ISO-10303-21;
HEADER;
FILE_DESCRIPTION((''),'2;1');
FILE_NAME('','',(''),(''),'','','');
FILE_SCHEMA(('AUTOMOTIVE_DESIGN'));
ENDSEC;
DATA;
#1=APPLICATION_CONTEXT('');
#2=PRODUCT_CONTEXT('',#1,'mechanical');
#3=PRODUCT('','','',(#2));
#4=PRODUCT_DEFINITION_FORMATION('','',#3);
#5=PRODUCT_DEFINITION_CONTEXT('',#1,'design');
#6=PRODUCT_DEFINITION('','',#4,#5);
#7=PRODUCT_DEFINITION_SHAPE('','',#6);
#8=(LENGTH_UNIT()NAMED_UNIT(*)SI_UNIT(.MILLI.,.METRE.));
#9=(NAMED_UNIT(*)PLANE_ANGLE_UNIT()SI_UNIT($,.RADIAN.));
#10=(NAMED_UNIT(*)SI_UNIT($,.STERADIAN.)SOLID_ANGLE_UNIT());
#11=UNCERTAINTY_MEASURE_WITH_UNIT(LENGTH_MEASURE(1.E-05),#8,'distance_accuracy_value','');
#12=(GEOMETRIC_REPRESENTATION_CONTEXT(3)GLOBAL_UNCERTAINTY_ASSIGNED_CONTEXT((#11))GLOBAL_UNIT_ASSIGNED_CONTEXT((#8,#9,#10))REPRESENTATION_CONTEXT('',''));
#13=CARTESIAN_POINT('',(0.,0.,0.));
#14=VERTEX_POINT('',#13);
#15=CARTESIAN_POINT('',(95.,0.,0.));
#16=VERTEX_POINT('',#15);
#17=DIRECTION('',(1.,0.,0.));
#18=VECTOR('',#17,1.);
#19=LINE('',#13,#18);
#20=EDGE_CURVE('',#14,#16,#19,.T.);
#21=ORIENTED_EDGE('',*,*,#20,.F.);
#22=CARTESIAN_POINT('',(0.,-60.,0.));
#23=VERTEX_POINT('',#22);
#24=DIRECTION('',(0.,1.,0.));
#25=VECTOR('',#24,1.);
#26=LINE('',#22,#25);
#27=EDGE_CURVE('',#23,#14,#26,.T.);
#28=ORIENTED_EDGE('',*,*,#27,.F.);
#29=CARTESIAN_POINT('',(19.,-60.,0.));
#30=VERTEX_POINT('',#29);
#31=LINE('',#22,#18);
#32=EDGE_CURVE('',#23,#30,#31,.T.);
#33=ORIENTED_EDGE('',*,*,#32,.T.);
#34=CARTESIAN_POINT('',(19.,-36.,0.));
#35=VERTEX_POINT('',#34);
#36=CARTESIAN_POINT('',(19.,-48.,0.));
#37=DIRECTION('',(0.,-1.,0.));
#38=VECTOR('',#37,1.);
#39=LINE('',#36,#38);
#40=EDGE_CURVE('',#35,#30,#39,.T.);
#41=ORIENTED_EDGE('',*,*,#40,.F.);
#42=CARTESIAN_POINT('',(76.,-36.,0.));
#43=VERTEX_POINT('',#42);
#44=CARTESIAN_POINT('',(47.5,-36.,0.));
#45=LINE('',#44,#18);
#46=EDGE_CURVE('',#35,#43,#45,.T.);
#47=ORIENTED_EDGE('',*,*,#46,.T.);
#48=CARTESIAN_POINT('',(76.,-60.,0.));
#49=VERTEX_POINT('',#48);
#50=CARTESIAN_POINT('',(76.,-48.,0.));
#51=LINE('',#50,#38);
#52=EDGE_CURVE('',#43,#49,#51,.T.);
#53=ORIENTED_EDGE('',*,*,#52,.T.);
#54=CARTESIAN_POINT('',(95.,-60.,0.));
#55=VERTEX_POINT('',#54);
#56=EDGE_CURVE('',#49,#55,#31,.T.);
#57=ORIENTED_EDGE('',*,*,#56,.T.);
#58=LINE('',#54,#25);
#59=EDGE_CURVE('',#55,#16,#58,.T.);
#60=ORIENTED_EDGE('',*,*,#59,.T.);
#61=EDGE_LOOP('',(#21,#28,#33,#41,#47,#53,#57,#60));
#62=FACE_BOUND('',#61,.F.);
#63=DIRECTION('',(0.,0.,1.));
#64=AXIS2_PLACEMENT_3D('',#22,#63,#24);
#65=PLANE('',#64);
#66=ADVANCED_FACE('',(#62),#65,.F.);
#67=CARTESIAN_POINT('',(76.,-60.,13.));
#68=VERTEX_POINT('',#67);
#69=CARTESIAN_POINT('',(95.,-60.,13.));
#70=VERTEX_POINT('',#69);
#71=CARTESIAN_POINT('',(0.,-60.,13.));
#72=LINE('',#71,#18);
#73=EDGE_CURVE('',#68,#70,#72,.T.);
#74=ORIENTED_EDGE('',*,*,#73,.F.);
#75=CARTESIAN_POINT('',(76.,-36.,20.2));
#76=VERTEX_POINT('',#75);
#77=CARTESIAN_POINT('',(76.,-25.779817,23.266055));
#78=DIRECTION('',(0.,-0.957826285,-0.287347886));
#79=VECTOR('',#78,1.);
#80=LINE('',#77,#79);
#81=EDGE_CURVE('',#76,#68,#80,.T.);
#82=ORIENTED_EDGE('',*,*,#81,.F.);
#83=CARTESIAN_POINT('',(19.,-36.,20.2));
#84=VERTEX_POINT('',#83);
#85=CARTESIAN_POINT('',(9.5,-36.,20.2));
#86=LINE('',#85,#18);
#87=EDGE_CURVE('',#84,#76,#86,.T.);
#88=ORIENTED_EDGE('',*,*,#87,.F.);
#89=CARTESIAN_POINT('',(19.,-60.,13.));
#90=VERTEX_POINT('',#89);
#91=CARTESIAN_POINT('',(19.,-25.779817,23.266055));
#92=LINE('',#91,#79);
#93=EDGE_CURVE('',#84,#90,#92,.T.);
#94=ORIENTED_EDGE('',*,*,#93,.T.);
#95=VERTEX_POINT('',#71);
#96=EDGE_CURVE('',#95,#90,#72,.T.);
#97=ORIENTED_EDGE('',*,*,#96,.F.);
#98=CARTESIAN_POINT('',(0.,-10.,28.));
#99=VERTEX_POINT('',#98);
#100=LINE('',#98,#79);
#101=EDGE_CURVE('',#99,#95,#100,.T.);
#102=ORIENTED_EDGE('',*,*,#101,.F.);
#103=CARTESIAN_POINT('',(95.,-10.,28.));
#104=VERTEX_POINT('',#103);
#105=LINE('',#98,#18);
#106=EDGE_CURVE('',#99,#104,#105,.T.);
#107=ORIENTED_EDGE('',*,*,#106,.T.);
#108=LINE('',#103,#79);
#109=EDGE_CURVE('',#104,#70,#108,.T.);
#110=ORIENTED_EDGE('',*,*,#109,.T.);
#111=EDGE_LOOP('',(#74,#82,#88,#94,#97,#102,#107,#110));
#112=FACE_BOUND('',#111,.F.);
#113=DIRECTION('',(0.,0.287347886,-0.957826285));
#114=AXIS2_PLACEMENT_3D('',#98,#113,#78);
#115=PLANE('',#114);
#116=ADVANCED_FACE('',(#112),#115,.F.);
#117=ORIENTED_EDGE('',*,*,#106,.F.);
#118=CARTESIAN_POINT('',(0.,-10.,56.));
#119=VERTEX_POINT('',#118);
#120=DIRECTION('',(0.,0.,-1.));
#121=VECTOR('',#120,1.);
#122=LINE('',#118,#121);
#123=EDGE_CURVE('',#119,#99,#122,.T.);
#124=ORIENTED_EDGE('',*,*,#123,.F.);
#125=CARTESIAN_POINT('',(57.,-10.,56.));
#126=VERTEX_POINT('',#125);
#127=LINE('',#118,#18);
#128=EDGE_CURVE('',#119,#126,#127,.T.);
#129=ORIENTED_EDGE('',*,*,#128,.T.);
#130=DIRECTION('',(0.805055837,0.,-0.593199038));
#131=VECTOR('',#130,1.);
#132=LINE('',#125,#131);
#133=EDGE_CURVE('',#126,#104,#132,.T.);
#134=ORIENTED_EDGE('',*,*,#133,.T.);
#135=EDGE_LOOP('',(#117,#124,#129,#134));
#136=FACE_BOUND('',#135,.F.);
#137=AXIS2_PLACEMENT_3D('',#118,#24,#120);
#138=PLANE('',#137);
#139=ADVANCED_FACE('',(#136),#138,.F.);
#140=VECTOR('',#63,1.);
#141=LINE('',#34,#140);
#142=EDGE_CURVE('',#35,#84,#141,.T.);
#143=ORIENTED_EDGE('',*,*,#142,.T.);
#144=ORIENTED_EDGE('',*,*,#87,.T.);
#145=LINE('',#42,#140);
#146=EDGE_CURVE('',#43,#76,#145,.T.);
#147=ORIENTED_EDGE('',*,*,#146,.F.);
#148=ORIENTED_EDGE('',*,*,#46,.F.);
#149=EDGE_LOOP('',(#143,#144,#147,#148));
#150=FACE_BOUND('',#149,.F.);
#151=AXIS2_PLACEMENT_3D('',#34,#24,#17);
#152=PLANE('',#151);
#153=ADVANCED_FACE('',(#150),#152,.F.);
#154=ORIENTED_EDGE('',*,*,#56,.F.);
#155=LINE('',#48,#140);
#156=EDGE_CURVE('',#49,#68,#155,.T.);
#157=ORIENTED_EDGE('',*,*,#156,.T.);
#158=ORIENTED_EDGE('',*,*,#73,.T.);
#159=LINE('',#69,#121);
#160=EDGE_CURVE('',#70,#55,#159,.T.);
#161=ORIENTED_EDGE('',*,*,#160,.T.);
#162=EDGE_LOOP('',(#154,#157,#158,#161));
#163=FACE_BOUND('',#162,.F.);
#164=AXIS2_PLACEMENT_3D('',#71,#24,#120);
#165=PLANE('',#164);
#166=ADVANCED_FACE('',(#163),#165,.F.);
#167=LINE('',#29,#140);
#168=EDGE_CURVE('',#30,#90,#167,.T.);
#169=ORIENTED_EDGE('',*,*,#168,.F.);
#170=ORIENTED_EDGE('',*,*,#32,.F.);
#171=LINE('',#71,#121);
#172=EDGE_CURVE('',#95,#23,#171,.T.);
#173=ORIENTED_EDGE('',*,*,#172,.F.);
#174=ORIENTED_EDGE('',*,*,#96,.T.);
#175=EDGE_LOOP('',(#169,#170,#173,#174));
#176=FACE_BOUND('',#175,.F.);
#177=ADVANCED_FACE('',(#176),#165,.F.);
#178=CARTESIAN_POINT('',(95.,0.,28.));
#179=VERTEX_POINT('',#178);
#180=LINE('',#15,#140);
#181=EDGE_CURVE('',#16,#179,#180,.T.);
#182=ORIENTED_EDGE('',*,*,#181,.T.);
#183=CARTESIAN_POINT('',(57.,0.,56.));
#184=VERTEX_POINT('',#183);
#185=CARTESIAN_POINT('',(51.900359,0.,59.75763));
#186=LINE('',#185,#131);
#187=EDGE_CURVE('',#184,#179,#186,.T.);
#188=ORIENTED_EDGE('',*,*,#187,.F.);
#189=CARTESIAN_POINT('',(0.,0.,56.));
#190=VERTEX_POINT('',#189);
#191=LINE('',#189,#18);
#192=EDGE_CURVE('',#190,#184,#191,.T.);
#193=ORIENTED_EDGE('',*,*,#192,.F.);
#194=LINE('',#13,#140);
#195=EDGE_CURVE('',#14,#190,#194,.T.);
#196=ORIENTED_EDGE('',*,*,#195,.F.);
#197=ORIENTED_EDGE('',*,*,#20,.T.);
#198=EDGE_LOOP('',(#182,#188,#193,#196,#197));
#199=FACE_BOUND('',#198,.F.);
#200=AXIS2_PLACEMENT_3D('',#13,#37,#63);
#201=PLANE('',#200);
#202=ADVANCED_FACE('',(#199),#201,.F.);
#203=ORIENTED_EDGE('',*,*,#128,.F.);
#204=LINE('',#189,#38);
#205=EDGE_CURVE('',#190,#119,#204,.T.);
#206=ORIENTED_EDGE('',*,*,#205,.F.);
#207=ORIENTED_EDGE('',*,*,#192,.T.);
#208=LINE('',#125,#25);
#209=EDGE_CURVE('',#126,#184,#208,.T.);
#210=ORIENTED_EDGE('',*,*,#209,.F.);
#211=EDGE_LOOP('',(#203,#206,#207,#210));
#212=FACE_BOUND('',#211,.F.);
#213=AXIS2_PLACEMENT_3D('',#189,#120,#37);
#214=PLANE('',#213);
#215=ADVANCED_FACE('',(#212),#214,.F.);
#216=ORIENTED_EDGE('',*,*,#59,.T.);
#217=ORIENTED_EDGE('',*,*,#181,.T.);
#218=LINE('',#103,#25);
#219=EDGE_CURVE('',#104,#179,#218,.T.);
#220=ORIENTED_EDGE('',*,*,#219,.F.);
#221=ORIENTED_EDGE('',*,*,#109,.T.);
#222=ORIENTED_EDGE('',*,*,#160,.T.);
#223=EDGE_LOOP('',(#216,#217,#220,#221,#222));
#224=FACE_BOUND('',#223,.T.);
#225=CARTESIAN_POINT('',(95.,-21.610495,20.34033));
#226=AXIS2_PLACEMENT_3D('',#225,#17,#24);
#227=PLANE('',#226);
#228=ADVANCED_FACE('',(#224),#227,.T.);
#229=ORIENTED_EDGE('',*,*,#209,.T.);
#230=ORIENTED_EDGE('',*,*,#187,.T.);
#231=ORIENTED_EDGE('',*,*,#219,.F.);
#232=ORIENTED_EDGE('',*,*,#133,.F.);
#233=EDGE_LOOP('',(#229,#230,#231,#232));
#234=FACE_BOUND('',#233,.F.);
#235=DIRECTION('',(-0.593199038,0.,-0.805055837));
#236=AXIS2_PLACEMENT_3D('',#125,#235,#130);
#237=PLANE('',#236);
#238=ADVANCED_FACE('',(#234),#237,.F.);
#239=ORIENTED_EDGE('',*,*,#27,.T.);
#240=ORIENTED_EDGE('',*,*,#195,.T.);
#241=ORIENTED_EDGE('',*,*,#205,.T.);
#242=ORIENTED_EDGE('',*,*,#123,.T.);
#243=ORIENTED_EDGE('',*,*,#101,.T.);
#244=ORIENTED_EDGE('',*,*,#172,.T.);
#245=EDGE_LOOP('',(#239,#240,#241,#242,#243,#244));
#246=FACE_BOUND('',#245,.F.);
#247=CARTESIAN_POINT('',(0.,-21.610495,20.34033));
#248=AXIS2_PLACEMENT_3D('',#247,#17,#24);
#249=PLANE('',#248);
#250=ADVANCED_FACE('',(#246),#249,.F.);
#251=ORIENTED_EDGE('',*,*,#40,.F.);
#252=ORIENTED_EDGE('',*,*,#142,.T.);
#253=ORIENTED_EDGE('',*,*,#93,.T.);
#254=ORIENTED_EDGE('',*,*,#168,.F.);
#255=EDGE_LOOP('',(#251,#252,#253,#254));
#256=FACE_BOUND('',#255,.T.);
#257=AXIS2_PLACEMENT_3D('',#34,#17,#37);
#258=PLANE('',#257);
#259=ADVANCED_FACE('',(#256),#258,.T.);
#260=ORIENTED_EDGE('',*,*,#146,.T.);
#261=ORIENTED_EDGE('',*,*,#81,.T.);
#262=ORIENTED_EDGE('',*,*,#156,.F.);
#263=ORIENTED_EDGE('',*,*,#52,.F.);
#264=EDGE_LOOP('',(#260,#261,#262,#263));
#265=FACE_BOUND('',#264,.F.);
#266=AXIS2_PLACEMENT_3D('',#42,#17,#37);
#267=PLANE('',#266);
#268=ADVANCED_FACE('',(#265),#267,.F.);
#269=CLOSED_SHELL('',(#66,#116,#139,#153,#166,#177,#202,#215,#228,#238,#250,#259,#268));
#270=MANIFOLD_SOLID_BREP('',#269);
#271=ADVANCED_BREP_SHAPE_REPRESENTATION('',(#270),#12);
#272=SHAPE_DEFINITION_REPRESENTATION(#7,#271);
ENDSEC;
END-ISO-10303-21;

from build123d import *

# Parameters (mm, degrees)
F1_DEPTH = 95
F3_DEPTH = 10.001
F4_W     = 57
F4_H     = 24
F6_DEPTH = 180
F7_W     = 57
F7_H     = 24
F8_DEPTH = 56.001
F9_DEPTH = 179


# Not quite as in the source:
# - an extrude ends at something that could not be found from the text; its depth is read off the source's solid
# - a feature of the source that left no trace in its solid (it failed there, or was rolled back) is left out
# - a feature names something its author has since deleted; it is built from what else it names


with BuildPart() as f1:
    # F0 (on Right) → F1 (new body)
    with BuildSketch(Plane.YZ):
        Polygon((0, 56), (-10, 56), (-10, 28), (-60, 13), (-60, 0), (0, 0), align=None)
    extrude(amount=F1_DEPTH)

    # F2 (on face) → F3 (cut, through all)
    with BuildSketch(Plane.XZ.offset(10)):
        Polygon((95, 56), (57, 56), (95, 28), align=None)
    extrude(amount=-F3_DEPTH, mode=Mode.SUBTRACT)

    # F4 (on face) → F6 (cut, through all)
    with BuildSketch(Plane(origin=(0, 0, 0), x_dir=(1, 0, 0), z_dir=(0, 0, -1))):
        with Locations((47.5, 48)):
            Rectangle(F4_W, F4_H)
    extrude(amount=F6_DEPTH, mode=Mode.SUBTRACT)

    # F7 (on face) → F8 (cut, through all)
    with BuildSketch(Plane(origin=(0, 0, 0), x_dir=(1, 0, 0), z_dir=(0, 0, -1))):
        with Locations((47.5, 48)):
            Rectangle(F7_W, F7_H)
    extrude(amount=-F8_DEPTH, mode=Mode.SUBTRACT)

    # F4 (on face) → F9 (cut, through all)
    with BuildSketch(Plane(origin=(0, 0, 0), x_dir=(1, 0, 0), z_dir=(0, 0, -1))):
        with Locations((47.5, 48)):
            Rectangle(F4_W, F4_H)
    extrude(amount=F9_DEPTH, mode=Mode.SUBTRACT)


solid = f1.part
